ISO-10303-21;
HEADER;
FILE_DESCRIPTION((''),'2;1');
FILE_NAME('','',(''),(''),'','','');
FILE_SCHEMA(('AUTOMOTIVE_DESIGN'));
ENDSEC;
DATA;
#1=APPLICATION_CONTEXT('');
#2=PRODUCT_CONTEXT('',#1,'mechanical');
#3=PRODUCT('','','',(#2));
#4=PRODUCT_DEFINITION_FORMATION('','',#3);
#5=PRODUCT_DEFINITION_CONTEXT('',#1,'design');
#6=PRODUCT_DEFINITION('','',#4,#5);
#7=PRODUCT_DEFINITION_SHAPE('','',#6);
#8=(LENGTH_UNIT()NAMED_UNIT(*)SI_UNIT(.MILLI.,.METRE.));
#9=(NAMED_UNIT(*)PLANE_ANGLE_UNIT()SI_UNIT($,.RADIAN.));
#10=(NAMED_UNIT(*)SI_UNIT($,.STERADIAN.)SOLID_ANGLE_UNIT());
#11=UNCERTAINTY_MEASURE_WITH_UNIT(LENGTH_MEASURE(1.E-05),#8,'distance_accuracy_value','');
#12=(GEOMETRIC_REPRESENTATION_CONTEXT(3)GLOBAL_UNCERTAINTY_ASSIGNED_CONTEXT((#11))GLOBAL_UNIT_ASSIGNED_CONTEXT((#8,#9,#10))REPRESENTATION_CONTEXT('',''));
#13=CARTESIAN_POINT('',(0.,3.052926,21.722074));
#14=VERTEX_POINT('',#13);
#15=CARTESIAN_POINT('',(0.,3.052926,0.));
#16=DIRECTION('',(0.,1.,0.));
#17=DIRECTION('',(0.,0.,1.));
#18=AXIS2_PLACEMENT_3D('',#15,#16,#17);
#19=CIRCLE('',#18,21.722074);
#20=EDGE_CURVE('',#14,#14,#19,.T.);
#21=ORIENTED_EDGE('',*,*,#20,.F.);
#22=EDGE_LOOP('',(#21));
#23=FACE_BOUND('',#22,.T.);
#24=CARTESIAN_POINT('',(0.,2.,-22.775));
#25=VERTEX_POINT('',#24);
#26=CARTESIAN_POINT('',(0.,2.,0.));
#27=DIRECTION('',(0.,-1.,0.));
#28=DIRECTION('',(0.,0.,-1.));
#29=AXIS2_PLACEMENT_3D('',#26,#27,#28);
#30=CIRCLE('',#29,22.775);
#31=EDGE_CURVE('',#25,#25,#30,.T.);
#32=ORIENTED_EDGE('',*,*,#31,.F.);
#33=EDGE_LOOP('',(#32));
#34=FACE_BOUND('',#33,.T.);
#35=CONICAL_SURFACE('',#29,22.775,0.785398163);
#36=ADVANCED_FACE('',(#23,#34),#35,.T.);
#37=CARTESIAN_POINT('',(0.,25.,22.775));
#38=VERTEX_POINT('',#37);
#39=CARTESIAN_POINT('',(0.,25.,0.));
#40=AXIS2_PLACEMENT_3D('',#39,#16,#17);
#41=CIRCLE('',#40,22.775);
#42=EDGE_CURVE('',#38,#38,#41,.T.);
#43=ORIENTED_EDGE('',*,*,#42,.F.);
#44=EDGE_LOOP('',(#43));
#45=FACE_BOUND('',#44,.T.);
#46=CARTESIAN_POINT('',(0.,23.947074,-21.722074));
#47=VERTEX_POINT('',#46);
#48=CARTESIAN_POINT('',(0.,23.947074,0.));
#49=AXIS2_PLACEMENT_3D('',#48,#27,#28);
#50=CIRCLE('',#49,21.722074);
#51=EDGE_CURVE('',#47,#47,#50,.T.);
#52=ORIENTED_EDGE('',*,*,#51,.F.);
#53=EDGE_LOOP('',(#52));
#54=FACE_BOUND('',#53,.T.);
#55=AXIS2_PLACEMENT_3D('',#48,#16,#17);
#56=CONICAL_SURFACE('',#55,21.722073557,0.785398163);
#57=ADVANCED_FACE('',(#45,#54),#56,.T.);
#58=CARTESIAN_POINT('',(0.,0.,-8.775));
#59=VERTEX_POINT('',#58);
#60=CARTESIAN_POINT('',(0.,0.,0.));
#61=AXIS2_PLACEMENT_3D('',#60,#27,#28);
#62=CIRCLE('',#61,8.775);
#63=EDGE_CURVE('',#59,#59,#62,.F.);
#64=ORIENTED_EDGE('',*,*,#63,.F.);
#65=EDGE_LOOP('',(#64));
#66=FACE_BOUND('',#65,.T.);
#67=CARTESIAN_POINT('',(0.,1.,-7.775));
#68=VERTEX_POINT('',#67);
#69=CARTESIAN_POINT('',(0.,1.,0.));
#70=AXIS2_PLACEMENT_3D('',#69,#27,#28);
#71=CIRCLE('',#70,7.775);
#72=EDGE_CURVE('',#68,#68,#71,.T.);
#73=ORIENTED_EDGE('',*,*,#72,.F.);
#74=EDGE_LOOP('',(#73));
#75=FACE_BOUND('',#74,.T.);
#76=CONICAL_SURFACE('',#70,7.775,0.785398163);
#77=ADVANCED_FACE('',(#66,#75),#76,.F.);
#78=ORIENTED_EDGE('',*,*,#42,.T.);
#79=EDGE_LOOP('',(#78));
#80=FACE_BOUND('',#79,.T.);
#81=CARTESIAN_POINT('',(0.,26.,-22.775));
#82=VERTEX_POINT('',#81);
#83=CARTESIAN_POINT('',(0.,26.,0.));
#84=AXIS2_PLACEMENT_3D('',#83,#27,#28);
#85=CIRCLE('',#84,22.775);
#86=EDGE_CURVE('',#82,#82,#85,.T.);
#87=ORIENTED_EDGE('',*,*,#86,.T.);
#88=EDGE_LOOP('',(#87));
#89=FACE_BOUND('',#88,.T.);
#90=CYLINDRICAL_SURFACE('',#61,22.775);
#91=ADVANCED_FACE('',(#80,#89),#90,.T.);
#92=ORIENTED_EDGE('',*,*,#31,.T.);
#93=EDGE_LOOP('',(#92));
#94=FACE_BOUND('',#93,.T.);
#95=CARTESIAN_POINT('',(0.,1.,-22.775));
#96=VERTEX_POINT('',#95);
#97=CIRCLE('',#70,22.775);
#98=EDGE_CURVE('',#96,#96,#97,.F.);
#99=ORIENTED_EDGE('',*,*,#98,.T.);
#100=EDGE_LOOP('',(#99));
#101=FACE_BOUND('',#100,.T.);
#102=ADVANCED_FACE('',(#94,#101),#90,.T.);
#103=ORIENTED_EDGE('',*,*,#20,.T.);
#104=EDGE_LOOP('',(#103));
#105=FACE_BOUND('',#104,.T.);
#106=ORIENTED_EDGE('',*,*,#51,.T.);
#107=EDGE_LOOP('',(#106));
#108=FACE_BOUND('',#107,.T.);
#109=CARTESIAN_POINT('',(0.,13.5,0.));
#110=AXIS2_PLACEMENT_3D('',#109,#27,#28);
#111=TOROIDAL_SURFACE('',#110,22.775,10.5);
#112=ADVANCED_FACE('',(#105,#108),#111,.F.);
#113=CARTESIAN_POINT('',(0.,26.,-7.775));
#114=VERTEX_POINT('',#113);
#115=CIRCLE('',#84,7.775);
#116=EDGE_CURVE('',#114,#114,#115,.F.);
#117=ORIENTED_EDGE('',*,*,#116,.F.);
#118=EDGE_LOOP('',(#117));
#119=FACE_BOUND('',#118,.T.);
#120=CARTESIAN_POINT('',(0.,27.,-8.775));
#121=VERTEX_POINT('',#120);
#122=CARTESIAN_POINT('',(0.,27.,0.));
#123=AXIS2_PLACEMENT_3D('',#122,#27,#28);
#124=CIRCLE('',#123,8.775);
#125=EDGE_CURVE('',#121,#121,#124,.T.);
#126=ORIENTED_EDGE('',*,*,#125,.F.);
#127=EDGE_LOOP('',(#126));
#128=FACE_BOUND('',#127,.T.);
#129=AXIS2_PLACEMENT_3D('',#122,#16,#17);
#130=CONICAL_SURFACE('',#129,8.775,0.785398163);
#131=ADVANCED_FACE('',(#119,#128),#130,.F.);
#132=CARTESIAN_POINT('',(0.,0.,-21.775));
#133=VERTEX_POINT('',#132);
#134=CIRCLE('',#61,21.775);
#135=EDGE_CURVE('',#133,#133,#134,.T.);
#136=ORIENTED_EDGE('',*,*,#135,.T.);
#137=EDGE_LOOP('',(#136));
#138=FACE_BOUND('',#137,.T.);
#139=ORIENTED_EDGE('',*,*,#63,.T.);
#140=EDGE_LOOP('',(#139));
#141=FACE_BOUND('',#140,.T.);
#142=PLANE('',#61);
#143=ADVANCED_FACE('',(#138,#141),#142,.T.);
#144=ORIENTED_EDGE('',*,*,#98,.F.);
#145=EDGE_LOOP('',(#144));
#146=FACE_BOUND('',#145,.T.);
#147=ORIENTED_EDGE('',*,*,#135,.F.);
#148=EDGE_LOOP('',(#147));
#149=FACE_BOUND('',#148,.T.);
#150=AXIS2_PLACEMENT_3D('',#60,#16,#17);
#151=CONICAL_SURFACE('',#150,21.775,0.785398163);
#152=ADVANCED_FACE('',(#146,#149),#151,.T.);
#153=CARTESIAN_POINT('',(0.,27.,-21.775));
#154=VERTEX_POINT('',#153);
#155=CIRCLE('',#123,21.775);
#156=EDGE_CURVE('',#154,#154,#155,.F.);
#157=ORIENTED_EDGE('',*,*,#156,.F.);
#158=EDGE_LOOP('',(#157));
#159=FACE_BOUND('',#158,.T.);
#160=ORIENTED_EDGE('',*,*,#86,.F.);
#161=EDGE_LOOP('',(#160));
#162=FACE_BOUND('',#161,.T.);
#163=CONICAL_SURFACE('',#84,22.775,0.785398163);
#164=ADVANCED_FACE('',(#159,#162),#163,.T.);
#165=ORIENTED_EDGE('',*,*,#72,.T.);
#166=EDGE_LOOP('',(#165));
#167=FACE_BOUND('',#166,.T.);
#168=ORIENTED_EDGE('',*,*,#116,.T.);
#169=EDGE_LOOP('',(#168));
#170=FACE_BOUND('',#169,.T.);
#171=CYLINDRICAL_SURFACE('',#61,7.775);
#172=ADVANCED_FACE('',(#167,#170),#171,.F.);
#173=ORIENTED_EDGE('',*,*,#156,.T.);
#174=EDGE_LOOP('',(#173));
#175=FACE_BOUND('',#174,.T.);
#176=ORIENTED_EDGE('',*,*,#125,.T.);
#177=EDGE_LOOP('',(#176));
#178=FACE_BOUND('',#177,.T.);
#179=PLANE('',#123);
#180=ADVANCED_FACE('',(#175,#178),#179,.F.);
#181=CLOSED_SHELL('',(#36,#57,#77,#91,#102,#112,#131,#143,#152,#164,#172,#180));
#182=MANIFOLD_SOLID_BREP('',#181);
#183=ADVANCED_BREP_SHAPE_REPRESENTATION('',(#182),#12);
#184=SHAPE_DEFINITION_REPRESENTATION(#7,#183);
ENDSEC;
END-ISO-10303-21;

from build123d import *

# Parameters (mm, degrees)
CHAMFER1_SIZE = 1


with BuildPart() as part:
    # Sketch1 → Revolve1 (revolve)
    with BuildSketch(Plane(origin=(0, 0, 0), x_dir=(0, 0, -1), z_dir=(1, 0, 0))):
        with BuildLine():
            ThreePointArc((22.775, 24), (12.275, 13.5), (22.775, 3))
            Line((22.775, 3), (22.775, 0))
            Line((22.775, 0), (7.775, 0))
            Line((7.775, 0), (7.775, 27))
            Line((7.775, 27), (22.775, 27))
            Line((22.775, 27), (22.775, 24))
        make_face()
    revolve(axis=Axis((0, 0, 0), (0, 1, 0)))

    # Chamfer1
    # the kernel refuses this chamfer: 1 mm, written as the material it takes off along each edge
    with BuildSketch(Plane(origin=(0, 3, 0), x_dir=(0, 0, -1), z_dir=(1, 0, 0))) as chamfer1_piece_1:
        with BuildLine():
            Line((21.722073557, 0.052926443), (22.775, -CHAMFER1_SIZE))
            Line((22.775, -CHAMFER1_SIZE), (22.775, 0))
            ThreePointArc((22.775, 0), (22.233019365, 0.013997092), (21.722073557, 0.052926443))
        make_face()
    revolve(axis=Axis((0, 3, 0), (0, 1, 0)), mode=Mode.SUBTRACT)
    with BuildSketch(Plane(origin=(0, 0, 0), x_dir=(0, 0, -1), z_dir=(1, 0, 0))) as chamfer1_piece_2:
        Polygon((22.775, CHAMFER1_SIZE), (22.775 - CHAMFER1_SIZE, 0), (22.775, 0), align=None)
    revolve(axis=Axis((0, 0, 0), (0, 1, 0)), mode=Mode.SUBTRACT)
    with BuildSketch(Plane(origin=(0, 0, 0), x_dir=(0, 0, -1), z_dir=(1, 0, 0))) as chamfer1_piece_3:
        Polygon((7.775 + CHAMFER1_SIZE, 0), (7.775, CHAMFER1_SIZE), (7.775, 0), align=None)
    revolve(axis=Axis((0, 0, 0), (0, 1, 0)), mode=Mode.SUBTRACT)
    with BuildSketch(Plane(origin=(0, 27, 0), x_dir=(0, 0, -1), z_dir=(1, 0, 0))) as chamfer1_piece_4:
        Polygon((7.775, -CHAMFER1_SIZE), (7.775 + CHAMFER1_SIZE, 0), (7.775, 0), align=None)
    revolve(axis=Axis((0, 27, 0), (0, 1, 0)), mode=Mode.SUBTRACT)
    with BuildSketch(Plane(origin=(0, 27, 0), x_dir=(0, 0, -1), z_dir=(1, 0, 0))) as chamfer1_piece_5:
        Polygon((22.775 - CHAMFER1_SIZE, 0), (22.775, -CHAMFER1_SIZE), (22.775, 0), align=None)
    revolve(axis=Axis((0, 27, 0), (0, 1, 0)), mode=Mode.SUBTRACT)
    with BuildSketch(Plane(origin=(0, 24, 0), x_dir=(0, 0, -1), z_dir=(1, 0, 0))) as chamfer1_piece_6:
        with BuildLine():
            Line((21.722073557, -0.052926443), (22.775, CHAMFER1_SIZE))
            Line((22.775, CHAMFER1_SIZE), (22.775, 0))
            ThreePointArc((22.775, 0), (22.233019365, -0.013997092), (21.722073557, -0.052926443))
        make_face()
    revolve(axis=Axis((0, 24, 0), (0, 1, 0)), mode=Mode.SUBTRACT)


solid = part.part
